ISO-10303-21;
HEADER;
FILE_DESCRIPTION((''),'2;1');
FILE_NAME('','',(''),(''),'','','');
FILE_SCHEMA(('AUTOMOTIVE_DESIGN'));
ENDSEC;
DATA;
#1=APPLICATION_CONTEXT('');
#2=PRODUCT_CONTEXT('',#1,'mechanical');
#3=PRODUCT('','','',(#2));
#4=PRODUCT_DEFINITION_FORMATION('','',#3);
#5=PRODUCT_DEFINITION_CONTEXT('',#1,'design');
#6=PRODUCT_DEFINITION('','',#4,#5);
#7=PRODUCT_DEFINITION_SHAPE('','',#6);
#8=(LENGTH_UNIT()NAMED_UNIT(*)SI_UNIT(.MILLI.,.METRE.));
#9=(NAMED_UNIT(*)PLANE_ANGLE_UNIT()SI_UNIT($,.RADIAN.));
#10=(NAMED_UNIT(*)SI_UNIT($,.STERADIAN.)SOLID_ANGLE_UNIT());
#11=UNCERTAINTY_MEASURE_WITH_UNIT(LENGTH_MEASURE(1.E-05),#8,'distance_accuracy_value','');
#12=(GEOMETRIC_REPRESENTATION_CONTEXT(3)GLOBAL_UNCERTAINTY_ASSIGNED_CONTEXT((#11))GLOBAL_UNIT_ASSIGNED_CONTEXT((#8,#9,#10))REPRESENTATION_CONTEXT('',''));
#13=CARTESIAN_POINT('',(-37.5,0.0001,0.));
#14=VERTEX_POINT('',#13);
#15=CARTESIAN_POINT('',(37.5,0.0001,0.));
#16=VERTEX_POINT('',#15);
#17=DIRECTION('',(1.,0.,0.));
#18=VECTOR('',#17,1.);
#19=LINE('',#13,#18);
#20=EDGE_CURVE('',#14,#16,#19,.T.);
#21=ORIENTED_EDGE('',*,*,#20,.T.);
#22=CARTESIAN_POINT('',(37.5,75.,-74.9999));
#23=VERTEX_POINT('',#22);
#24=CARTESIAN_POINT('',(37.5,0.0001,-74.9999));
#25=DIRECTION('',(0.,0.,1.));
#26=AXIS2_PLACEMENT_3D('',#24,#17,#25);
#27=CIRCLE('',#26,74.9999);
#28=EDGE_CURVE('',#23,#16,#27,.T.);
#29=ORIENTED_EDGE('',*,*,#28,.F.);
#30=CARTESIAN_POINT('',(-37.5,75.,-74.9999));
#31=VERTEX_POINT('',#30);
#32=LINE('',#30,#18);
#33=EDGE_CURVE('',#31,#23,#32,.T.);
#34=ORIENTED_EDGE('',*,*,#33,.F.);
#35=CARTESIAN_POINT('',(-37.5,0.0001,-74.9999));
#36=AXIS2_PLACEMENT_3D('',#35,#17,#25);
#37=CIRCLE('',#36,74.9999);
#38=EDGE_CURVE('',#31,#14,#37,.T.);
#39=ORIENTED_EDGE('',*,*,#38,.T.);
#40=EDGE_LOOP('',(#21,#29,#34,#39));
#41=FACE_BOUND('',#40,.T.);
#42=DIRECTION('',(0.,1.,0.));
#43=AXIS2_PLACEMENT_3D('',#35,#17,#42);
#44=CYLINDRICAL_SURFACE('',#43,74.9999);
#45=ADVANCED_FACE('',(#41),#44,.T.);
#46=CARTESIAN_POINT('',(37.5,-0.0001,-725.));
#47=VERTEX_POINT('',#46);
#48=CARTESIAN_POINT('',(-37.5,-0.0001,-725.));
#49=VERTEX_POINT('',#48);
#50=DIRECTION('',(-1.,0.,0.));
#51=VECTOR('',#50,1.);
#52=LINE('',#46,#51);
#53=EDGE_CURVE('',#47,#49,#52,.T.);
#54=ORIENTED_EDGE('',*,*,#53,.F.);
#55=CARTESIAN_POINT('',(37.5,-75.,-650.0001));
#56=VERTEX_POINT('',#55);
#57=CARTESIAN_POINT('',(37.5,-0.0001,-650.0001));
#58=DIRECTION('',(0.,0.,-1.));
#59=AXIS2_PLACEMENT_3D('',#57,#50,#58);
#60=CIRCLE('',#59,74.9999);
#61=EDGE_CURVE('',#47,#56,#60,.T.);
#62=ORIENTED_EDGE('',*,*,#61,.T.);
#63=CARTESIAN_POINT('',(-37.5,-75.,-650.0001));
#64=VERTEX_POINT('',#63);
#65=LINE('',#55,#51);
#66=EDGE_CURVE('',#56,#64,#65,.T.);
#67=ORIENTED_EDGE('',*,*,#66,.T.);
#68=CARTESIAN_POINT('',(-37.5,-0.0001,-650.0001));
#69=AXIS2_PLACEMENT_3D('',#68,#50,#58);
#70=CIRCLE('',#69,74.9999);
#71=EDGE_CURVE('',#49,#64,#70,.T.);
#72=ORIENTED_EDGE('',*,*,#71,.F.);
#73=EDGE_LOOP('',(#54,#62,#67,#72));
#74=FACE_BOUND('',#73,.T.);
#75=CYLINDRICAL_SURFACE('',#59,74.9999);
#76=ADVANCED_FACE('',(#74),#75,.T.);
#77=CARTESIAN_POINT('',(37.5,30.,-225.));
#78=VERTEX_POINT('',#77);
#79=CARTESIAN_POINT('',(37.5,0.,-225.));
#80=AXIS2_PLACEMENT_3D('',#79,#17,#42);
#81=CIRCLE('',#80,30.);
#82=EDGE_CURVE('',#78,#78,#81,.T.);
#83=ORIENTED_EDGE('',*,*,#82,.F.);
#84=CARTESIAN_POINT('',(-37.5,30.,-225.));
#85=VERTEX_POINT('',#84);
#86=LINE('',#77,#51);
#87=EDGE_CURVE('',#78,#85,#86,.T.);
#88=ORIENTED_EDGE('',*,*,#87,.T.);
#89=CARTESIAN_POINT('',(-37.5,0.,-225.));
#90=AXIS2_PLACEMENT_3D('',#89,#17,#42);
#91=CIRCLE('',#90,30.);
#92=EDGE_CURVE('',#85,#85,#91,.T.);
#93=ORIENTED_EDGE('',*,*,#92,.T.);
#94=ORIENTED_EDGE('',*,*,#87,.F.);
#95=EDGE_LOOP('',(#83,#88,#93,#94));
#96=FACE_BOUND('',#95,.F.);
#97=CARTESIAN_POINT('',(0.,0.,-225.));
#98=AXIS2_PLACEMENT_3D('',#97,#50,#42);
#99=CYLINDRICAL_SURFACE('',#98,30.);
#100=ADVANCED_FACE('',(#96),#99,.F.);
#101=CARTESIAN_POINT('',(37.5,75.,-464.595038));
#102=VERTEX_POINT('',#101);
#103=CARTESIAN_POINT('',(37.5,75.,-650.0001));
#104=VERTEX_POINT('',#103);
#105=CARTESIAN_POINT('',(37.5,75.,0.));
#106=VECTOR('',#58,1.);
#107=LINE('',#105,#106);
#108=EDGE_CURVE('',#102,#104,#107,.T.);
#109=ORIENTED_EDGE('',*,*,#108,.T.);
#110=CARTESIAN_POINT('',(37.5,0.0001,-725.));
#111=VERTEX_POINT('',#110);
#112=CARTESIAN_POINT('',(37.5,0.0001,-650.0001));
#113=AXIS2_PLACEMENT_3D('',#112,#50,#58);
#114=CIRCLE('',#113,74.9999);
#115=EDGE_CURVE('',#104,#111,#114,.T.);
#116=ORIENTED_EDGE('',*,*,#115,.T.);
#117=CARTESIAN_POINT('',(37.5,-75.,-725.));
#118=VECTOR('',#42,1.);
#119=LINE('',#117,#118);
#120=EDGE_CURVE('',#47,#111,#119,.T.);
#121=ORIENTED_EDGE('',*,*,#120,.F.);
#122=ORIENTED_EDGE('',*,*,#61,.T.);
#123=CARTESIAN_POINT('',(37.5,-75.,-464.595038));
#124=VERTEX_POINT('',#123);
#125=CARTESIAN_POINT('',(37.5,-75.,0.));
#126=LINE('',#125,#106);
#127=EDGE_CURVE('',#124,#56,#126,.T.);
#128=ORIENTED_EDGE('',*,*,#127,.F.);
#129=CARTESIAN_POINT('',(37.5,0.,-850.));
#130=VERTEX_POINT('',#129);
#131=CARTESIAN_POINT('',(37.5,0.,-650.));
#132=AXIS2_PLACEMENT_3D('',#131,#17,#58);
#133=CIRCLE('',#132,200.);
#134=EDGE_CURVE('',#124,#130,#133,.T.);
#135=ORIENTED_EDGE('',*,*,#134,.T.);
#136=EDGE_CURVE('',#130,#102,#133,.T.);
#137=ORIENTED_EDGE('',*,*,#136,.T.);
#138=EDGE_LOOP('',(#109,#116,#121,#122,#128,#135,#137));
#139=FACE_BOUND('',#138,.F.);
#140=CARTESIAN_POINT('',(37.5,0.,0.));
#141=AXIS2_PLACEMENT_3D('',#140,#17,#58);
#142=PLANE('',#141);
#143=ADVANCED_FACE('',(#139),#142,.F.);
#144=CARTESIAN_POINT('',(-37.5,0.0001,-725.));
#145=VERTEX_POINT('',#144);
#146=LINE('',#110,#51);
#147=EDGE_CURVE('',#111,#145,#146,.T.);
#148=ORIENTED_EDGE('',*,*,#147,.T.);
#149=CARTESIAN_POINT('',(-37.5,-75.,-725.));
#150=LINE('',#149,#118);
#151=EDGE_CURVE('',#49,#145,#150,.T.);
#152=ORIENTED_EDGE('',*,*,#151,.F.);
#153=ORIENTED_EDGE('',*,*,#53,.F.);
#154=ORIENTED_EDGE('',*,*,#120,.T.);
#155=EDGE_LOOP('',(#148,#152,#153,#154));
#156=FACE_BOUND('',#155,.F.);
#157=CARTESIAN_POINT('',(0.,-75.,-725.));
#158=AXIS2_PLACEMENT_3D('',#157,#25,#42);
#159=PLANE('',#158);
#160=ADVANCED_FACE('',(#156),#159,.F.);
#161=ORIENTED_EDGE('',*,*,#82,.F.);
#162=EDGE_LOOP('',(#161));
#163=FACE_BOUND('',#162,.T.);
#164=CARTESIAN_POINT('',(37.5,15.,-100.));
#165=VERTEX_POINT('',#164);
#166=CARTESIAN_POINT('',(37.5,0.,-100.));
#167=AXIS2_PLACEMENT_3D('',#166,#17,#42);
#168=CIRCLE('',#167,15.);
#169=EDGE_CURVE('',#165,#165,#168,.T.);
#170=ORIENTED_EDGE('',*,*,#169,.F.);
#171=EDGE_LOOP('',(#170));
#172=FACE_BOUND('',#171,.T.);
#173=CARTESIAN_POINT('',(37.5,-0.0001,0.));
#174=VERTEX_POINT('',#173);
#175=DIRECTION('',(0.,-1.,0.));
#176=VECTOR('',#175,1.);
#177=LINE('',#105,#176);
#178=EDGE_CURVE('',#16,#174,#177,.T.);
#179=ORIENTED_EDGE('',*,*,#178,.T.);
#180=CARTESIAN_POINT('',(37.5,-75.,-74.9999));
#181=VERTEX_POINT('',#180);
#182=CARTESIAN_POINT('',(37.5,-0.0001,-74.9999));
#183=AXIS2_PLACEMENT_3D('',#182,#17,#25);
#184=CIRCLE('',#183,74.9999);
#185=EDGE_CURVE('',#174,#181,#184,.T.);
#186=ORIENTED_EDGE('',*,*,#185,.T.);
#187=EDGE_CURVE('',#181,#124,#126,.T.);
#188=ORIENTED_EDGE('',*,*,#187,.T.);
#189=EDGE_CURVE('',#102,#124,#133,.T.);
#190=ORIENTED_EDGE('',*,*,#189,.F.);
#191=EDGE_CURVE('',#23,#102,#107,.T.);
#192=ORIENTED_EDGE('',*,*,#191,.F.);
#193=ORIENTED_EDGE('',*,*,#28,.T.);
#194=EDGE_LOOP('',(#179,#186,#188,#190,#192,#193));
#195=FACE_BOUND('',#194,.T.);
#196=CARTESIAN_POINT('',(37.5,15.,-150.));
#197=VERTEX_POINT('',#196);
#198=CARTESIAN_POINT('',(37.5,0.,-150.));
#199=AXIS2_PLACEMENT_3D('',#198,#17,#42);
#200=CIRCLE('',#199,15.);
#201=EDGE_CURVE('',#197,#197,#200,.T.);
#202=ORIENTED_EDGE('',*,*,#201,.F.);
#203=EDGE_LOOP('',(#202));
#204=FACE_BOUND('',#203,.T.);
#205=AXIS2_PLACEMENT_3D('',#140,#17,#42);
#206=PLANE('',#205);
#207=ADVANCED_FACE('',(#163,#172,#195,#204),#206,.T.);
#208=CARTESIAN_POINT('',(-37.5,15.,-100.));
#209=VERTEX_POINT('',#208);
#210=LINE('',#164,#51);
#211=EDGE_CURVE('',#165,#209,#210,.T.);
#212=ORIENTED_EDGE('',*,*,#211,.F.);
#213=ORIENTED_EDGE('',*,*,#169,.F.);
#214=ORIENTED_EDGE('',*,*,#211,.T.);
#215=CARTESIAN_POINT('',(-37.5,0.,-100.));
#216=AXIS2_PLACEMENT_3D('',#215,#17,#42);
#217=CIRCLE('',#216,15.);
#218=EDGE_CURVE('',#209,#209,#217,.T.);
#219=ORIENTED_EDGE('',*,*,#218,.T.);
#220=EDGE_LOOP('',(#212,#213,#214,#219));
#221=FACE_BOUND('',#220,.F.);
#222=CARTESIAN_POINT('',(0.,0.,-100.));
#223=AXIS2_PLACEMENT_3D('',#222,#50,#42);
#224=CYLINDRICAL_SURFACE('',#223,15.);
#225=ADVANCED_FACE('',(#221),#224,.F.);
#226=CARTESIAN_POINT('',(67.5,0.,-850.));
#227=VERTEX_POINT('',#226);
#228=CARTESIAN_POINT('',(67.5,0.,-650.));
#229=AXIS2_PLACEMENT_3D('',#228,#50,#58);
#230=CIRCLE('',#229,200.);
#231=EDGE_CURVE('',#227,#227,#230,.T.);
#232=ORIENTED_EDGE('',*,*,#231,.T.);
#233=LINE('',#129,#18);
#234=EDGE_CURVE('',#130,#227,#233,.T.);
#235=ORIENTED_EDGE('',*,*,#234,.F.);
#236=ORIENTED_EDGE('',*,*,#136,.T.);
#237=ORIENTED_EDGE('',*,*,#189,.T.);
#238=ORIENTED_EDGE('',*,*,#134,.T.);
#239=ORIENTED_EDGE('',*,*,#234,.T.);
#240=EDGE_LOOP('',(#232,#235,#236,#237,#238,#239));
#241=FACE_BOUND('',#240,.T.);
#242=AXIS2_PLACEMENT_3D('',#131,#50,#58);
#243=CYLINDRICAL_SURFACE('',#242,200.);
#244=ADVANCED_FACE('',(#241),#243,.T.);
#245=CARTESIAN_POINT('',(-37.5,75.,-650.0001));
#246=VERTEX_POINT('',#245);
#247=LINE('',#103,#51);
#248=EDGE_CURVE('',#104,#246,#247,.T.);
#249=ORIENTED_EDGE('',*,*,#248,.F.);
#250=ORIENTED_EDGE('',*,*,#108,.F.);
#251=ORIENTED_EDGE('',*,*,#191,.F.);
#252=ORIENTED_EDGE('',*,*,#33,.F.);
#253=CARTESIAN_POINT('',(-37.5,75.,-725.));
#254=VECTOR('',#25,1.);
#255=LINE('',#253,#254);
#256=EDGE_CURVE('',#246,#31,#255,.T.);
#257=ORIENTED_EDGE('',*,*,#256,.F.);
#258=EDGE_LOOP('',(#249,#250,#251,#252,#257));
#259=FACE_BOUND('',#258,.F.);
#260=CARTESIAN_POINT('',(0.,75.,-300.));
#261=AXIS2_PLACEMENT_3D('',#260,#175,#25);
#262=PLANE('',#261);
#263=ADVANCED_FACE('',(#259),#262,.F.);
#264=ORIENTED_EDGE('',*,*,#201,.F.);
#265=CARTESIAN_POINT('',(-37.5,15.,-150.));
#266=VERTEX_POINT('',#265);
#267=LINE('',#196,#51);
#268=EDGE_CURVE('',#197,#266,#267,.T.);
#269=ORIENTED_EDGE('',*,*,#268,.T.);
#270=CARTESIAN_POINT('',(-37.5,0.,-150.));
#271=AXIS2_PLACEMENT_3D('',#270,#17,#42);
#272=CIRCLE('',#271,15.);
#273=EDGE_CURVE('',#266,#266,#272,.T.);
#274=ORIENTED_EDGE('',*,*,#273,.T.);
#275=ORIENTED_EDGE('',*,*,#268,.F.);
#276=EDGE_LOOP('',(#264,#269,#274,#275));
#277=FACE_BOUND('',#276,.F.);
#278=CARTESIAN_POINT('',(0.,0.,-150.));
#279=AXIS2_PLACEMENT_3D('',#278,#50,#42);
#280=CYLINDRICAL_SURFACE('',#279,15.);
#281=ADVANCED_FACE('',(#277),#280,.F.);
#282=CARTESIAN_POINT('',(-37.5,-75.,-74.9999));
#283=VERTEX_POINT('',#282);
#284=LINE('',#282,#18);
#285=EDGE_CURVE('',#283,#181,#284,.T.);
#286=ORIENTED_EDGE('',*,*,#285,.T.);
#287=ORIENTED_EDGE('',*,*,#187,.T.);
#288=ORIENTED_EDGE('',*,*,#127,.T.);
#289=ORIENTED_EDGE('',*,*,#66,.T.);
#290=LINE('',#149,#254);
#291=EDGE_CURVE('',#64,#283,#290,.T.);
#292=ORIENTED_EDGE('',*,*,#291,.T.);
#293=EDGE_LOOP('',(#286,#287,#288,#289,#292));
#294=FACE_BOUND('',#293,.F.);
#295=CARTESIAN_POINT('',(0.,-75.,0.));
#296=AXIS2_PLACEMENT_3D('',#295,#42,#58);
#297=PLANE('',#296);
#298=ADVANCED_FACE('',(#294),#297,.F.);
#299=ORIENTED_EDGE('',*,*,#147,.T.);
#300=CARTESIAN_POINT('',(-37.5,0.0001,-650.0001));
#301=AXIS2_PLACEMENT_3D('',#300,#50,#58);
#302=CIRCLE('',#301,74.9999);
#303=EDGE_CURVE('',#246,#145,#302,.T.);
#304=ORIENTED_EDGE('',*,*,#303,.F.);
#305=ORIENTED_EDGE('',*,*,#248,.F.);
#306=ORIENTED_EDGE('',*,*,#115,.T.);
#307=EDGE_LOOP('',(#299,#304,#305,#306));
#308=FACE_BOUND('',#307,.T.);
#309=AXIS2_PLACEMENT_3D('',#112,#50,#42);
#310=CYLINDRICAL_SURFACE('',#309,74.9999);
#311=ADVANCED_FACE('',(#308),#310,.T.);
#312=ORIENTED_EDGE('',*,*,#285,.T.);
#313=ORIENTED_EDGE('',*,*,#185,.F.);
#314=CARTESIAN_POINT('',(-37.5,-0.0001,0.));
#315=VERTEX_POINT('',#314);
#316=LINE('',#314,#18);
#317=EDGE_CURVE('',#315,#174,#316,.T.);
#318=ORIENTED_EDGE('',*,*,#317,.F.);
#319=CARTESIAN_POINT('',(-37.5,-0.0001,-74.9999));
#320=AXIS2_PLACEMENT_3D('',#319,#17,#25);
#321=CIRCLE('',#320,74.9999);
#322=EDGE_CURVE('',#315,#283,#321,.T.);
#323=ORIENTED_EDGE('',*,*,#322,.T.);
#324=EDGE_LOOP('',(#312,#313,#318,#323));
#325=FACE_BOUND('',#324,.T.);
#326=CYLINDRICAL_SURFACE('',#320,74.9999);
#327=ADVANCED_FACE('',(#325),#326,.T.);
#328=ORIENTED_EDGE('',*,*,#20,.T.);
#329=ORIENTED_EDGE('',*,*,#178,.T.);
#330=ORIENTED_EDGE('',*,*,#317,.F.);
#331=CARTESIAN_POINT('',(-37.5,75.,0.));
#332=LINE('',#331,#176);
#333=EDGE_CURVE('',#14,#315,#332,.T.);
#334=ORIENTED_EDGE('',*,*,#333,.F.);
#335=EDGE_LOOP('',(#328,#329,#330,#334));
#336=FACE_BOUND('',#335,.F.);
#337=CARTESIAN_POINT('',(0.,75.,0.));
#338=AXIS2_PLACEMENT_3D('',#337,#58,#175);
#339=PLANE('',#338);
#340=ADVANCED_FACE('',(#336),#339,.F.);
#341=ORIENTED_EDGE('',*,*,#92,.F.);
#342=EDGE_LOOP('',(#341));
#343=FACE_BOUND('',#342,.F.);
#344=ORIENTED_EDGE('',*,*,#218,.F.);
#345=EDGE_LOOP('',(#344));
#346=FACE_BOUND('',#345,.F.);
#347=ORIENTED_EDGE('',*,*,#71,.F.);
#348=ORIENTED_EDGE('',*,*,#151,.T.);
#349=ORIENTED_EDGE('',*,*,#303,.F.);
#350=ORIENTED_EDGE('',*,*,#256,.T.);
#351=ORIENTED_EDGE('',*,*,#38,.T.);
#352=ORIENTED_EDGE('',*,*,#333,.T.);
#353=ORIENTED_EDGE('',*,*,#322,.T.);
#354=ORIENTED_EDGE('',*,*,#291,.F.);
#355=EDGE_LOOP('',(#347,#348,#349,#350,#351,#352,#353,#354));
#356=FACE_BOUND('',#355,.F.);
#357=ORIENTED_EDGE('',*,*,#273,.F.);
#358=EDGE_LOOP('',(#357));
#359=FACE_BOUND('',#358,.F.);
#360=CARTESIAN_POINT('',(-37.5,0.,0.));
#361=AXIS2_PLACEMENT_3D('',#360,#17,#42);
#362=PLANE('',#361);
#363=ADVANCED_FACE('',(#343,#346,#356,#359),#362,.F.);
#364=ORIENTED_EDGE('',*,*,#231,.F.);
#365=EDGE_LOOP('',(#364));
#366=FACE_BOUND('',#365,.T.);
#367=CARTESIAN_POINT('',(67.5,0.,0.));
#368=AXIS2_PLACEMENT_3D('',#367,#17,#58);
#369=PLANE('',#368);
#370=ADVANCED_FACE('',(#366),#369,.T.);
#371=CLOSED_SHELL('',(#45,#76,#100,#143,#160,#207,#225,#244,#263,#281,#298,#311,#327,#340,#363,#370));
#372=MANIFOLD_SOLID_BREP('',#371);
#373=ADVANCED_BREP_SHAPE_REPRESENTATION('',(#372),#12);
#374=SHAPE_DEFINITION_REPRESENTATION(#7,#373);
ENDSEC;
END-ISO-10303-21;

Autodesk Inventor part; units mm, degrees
ref_plane "YZ Plane" through (0, 0, 0) normal (1, 0, 0) x (0, 1, 0)
ref_plane "XZ Plane" through (0, 0, 0) normal (0, 1, 0) x (-1, 0, 0)
ref_plane "XY Plane" through (0, 0, 0) normal (0, 0, 1) x (1, 0, 0)
sketch "草圖1" plane through (0, 0, 0) normal (1, 0, 0) x (0, 1, 0)
  line L0 (75, 0) -> (-75, 0)
  line L1 (-75, 0) -> (-75, -300)
  line L2 (-75, -300) -> (75, -300)
  line L3 (75, -300) -> (75, 0)
  circle A0 centre (0, -100) radius 15
  circle A1 centre (0, -150) radius 15
  circle A2 centre (0, -225) radius 30
  line L4 (75, -300) -> (-75, -300)
  line L5 (-75, -300) -> (-75, -725)
  line L6 (-75, -725) -> (75, -725)
  line L7 (75, -725) -> (75, -300)
  point P0 (0, 0)
  point P1 (0, 0)
  dimension "d0" = 150
  dimension "d1" = 300
  dimension "d2" = 200
  dimension "d3" = 50
  dimension "d4" = 75
  dimension "d5" = 60
  dimension "d6" = 30
  dimension "d7" = 500
extrude "擠出1" add sketch "草圖1" along normal mid plane 75
full round fillet "圓角1" first side at (-12.5, -75, -241.6667) centre faces at (12.5, -25, -725) second side at (-12.5, 75, -483.3333)
sketch "草圖2" plane through (37.5, 0, 0) normal (1, 0, 0) x (0, 0, -1)
  arc A0 (650, -75) -> (650, 75) centre (650, 0) ccw projected
  line L0 (650, 75) -> (0, 75) projected
  line L1 (0, 75) -> (0, -75) projected
  line L2 (0, -75) -> (650, -75) projected
  circle A1 centre (225, 0) radius 30 projected
  circle A2 centre (150, 0) radius 15 projected
  circle A3 centre (100, 0) radius 15 projected
  circle A4 centre (650, 0) radius 200
  point P0 (0, 0)
  dimension "d10" = 400
extrude "擠出2" add sketch "草圖2" along normal blind 30 contours L2 A4 L0 A0 | A0 L0 A4 L2
fillet "圓角2" radius 75 2 edges at (0, 75, 0) (0, -75, 0)
properties part number "震動臂"
